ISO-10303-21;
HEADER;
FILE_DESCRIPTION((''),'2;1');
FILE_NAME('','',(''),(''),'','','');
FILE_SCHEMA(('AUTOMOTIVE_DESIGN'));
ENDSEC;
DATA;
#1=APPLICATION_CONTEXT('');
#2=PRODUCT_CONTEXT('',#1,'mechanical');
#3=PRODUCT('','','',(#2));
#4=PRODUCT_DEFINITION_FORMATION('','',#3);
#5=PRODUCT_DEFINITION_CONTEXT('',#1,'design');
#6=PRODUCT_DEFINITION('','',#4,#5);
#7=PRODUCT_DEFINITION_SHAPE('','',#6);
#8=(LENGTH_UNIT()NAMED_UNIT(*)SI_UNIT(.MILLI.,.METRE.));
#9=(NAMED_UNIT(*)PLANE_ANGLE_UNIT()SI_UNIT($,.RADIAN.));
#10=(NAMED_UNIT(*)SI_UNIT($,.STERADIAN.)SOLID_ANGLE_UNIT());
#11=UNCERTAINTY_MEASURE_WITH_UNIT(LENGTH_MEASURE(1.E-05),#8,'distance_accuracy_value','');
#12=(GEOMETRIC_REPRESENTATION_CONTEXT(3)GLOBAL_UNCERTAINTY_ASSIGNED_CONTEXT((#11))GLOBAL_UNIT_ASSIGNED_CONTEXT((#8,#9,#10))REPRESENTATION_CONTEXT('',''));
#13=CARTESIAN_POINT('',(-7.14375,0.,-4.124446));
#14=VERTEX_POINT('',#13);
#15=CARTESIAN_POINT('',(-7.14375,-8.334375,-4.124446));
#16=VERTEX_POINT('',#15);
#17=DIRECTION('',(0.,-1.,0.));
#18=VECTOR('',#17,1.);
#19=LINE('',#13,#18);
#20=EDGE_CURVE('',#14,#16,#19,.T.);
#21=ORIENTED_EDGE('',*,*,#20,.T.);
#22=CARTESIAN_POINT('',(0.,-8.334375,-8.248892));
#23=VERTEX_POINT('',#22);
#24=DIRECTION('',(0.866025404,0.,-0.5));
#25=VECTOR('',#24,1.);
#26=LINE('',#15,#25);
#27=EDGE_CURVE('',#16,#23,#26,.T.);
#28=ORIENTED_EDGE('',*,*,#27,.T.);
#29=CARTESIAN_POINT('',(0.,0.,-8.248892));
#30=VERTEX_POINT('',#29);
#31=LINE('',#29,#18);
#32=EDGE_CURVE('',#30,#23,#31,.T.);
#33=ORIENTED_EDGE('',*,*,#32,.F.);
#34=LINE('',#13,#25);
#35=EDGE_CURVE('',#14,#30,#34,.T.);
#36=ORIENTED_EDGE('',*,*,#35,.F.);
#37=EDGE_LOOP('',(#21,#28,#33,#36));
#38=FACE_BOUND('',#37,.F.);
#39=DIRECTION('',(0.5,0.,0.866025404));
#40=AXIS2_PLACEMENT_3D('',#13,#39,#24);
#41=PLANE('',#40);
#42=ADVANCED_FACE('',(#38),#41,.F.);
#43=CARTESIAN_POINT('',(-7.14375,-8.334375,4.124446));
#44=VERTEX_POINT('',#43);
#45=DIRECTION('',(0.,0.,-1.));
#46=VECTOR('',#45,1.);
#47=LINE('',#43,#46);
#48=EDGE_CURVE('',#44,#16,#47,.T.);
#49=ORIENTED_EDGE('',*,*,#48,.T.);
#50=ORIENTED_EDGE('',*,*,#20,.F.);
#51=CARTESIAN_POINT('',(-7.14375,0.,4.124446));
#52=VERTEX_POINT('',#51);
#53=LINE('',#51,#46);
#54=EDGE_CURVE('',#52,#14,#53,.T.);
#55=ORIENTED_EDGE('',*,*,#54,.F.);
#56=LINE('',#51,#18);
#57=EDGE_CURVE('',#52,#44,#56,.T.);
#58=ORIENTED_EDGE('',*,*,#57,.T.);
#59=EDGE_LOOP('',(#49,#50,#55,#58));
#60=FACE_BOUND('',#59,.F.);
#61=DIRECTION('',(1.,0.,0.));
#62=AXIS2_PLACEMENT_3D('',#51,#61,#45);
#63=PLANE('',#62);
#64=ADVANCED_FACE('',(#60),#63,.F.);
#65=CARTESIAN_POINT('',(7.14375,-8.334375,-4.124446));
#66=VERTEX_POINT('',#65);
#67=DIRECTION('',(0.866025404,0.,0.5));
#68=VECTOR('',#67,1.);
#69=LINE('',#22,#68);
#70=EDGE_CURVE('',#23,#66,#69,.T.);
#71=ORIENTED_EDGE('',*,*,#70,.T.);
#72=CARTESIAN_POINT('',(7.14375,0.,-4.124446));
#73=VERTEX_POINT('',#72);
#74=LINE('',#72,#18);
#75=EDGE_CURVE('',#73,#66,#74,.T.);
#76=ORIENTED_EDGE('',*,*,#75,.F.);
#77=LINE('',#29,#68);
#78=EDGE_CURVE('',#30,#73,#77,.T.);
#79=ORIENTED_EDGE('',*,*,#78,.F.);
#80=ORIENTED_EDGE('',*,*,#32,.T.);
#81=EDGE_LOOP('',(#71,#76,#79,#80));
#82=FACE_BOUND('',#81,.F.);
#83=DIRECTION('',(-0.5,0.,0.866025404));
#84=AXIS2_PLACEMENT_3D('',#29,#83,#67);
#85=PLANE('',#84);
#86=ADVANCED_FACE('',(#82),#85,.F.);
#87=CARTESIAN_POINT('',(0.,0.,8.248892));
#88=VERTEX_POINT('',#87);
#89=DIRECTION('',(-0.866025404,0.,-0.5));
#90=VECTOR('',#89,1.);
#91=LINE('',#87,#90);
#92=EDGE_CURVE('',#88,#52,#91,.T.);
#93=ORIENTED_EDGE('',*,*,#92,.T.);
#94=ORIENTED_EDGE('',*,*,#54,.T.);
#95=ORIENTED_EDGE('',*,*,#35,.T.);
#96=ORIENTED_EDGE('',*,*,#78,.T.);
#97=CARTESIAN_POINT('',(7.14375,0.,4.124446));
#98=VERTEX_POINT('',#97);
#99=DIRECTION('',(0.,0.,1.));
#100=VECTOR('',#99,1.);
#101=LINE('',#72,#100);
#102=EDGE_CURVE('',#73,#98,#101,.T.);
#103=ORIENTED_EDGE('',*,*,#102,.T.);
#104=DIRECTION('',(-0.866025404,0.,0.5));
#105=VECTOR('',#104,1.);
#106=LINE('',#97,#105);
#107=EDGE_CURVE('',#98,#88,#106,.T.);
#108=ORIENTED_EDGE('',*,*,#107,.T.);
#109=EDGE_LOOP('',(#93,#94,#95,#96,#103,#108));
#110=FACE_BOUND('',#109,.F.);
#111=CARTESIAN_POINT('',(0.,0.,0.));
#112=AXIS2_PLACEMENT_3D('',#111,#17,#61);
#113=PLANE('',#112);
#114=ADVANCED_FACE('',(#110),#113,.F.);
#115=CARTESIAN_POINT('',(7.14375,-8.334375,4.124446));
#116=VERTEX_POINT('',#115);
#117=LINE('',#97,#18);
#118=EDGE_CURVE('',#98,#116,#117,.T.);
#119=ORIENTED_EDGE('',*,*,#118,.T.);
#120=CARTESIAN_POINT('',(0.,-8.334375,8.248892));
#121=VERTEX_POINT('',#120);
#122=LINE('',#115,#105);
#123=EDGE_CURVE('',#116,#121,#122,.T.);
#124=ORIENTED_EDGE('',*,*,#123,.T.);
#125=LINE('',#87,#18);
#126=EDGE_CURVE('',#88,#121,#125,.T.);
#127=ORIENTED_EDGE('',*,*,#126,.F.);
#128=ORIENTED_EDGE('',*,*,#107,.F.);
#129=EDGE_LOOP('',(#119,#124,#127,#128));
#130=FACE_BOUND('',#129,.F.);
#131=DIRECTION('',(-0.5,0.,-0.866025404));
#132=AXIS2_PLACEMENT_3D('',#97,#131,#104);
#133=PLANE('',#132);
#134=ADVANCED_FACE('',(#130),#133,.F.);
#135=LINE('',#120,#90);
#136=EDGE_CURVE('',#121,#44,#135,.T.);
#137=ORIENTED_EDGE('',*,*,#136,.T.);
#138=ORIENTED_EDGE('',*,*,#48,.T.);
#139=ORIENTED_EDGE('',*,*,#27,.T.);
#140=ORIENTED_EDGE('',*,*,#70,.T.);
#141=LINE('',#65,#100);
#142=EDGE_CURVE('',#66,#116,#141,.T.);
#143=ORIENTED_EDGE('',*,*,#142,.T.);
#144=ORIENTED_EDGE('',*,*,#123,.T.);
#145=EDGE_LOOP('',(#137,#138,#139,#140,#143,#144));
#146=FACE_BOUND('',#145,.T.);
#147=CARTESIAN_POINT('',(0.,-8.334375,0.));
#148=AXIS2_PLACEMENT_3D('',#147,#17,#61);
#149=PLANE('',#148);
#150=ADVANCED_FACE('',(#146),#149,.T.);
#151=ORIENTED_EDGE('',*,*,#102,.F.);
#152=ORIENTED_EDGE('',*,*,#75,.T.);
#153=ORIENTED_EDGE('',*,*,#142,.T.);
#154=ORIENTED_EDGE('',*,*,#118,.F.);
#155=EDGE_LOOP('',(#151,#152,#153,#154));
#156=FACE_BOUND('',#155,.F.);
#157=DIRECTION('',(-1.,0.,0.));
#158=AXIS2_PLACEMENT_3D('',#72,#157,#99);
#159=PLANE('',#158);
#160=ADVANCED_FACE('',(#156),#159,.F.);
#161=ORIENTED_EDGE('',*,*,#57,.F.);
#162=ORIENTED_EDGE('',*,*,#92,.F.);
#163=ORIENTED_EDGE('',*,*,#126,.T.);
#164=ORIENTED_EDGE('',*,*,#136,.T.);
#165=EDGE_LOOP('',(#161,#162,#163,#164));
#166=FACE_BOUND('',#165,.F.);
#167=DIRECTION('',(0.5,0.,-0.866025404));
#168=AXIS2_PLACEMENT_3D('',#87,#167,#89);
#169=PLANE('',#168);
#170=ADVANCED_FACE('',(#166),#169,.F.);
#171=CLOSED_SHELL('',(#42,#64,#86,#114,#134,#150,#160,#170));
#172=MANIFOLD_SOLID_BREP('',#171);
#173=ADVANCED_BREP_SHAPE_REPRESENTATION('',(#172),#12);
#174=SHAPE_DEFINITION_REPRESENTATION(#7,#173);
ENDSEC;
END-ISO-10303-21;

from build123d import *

# Parameters (mm, degrees)
F1_DEPTH = 8.334375


# Not quite as in the source:
# - a length typed as a fraction of an inch, garbled in the dataset ("3 / 203.2 mm" for 3/8 in), is restored


with BuildPart() as f1:
    # F0 (on Front) → F1 (new body)
    with BuildSketch(Plane.XZ):
        Polygon((7.14375, -4.1244459855), (7.14375, 4.1244459855), (0, 8.248891971), (-7.14375, 4.1244459855), (-7.14375, -4.1244459855), (0, -8.248891971), align=None)
    extrude(amount=F1_DEPTH)


solid = f1.part
